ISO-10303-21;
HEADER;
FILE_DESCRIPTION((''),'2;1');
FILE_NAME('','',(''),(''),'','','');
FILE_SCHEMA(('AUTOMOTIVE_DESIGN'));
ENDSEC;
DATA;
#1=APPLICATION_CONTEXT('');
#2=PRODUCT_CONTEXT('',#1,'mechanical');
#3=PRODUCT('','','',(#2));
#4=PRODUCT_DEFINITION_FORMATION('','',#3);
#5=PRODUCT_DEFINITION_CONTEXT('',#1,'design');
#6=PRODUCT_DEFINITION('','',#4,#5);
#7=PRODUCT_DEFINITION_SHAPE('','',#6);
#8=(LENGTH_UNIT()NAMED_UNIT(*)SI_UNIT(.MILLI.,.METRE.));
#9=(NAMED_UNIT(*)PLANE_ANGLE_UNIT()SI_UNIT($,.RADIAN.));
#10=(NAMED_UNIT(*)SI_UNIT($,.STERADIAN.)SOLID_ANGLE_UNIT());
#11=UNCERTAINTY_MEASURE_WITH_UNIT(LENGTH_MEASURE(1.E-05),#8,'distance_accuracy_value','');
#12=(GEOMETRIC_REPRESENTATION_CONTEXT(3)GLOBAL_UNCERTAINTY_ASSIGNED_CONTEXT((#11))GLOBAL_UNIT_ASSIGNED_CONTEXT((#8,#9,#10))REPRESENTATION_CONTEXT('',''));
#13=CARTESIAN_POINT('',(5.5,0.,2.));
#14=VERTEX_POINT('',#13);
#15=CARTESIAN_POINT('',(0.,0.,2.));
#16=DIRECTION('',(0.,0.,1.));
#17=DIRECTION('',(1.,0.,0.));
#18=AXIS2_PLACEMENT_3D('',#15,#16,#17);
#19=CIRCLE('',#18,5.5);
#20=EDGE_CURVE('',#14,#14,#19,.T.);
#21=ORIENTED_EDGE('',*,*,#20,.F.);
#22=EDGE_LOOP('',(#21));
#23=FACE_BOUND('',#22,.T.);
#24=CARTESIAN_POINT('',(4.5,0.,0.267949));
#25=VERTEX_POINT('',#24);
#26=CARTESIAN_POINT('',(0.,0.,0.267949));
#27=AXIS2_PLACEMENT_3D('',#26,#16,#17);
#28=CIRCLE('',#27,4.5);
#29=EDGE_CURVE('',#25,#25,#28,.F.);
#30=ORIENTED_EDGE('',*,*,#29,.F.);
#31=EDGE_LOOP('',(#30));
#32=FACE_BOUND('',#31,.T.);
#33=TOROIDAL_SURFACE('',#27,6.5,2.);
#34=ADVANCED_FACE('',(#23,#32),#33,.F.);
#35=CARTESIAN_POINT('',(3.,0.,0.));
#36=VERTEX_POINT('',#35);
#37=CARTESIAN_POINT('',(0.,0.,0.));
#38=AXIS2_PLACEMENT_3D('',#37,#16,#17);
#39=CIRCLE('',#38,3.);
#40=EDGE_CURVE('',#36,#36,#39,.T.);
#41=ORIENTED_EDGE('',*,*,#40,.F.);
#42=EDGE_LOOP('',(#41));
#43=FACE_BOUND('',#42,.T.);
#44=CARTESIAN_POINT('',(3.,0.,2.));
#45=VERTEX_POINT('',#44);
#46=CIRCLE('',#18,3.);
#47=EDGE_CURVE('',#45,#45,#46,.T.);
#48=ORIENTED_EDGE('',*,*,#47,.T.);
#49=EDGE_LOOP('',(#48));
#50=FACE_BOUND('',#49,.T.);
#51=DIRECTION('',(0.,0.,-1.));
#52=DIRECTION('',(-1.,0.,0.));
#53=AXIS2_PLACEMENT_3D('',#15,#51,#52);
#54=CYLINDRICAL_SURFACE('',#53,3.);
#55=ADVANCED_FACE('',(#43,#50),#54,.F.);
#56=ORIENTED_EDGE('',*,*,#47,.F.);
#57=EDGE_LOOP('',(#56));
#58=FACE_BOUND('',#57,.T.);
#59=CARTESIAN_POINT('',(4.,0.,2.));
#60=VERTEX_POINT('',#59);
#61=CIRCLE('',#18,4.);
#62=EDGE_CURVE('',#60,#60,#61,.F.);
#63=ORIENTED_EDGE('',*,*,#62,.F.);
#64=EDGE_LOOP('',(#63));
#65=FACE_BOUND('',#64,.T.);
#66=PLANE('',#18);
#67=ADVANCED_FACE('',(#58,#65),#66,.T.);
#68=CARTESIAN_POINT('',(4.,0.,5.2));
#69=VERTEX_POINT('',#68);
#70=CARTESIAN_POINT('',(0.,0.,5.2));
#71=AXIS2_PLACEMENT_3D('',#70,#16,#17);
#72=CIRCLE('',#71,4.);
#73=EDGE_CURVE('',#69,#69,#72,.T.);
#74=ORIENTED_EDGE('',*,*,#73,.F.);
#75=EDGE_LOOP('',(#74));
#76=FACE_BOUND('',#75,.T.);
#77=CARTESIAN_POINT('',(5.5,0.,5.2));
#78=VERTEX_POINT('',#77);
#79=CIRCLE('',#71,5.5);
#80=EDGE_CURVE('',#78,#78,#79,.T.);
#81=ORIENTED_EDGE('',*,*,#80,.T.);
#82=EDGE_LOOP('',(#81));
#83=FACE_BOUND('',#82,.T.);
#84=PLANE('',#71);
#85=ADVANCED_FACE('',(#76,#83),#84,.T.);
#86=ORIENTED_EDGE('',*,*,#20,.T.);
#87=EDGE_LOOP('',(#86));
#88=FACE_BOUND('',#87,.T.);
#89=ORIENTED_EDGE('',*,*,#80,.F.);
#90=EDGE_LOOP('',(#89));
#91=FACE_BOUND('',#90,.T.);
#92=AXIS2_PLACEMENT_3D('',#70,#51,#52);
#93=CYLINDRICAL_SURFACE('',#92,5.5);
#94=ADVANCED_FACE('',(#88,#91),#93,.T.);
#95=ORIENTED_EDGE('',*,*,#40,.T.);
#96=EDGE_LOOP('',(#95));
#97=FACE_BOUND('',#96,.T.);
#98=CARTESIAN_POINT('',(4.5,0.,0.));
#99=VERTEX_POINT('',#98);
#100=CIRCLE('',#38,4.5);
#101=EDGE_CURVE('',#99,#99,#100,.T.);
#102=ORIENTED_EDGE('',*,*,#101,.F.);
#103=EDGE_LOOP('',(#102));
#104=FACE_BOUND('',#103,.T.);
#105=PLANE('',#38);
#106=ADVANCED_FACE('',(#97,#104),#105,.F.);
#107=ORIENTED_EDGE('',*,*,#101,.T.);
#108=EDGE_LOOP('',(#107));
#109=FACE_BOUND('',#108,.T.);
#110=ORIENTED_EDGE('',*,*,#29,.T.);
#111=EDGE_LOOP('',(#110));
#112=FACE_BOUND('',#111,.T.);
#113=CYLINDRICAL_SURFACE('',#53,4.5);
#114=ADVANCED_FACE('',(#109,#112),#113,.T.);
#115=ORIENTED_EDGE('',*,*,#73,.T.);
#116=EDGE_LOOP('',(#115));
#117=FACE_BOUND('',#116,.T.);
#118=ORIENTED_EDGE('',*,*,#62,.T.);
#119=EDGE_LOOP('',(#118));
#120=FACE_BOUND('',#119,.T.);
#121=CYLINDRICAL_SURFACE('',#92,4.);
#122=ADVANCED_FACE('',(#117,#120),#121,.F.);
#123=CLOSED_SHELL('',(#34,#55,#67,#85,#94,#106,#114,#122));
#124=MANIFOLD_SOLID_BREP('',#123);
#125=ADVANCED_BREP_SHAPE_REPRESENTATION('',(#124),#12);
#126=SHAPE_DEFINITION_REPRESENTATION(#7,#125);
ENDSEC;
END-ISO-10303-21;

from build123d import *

# Parameters (mm, degrees)
CROQUIS1_R              = 4.5
CROQUIS1_R_2            = 3
SALIENTE_EXTRUIR1_DEPTH = 2
CROQUIS2_R              = 5.5
CROQUIS2_R_2            = 4
SALIENTE_EXTRUIR2_DEPTH = 3.2
REDONDEO1_R             = 2


with BuildPart() as part:
    # Croquis1 → Saliente-Extruir1 (new body)
    with BuildSketch(Plane.XY):
        Circle(CROQUIS1_R)
        Circle(CROQUIS1_R_2, mode=Mode.SUBTRACT)
    extrude(amount=SALIENTE_EXTRUIR1_DEPTH)

    # Croquis2 → Saliente-Extruir2 (add)
    with BuildSketch(Plane.XY.offset(2)):
        Circle(CROQUIS2_R)
        Circle(CROQUIS2_R_2, mode=Mode.SUBTRACT)
    extrude(amount=SALIENTE_EXTRUIR2_DEPTH)

    # Redondeo1
    # the kernel refuses this fillet: 2 mm, written as the material it adds along each edge
    with BuildSketch(Plane(origin=(0, 0, 2), x_dir=(1, 0, 0), z_dir=(0, -1, 0))) as redondeo1_piece_1:
        with BuildLine():
            CenterArc((6.5, -1.732050808), REDONDEO1_R, 120, 60)
            Line((5.5, 0), (5.48, 0.034641016))
            ThreePointArc((5.48, 0.034641016), (5, 0.04), (4.5, 0.04))
            Line((4.5, 0.04), (4.46, 0))
            Line((4.46, 0), (4.46, -1.732050808))
            Line((4.46, -1.732050808), (4.5, -1.732050808))
        make_face()
    revolve(axis=Axis((0, 0, 2), (0, 0, 1)))


solid = part.part
